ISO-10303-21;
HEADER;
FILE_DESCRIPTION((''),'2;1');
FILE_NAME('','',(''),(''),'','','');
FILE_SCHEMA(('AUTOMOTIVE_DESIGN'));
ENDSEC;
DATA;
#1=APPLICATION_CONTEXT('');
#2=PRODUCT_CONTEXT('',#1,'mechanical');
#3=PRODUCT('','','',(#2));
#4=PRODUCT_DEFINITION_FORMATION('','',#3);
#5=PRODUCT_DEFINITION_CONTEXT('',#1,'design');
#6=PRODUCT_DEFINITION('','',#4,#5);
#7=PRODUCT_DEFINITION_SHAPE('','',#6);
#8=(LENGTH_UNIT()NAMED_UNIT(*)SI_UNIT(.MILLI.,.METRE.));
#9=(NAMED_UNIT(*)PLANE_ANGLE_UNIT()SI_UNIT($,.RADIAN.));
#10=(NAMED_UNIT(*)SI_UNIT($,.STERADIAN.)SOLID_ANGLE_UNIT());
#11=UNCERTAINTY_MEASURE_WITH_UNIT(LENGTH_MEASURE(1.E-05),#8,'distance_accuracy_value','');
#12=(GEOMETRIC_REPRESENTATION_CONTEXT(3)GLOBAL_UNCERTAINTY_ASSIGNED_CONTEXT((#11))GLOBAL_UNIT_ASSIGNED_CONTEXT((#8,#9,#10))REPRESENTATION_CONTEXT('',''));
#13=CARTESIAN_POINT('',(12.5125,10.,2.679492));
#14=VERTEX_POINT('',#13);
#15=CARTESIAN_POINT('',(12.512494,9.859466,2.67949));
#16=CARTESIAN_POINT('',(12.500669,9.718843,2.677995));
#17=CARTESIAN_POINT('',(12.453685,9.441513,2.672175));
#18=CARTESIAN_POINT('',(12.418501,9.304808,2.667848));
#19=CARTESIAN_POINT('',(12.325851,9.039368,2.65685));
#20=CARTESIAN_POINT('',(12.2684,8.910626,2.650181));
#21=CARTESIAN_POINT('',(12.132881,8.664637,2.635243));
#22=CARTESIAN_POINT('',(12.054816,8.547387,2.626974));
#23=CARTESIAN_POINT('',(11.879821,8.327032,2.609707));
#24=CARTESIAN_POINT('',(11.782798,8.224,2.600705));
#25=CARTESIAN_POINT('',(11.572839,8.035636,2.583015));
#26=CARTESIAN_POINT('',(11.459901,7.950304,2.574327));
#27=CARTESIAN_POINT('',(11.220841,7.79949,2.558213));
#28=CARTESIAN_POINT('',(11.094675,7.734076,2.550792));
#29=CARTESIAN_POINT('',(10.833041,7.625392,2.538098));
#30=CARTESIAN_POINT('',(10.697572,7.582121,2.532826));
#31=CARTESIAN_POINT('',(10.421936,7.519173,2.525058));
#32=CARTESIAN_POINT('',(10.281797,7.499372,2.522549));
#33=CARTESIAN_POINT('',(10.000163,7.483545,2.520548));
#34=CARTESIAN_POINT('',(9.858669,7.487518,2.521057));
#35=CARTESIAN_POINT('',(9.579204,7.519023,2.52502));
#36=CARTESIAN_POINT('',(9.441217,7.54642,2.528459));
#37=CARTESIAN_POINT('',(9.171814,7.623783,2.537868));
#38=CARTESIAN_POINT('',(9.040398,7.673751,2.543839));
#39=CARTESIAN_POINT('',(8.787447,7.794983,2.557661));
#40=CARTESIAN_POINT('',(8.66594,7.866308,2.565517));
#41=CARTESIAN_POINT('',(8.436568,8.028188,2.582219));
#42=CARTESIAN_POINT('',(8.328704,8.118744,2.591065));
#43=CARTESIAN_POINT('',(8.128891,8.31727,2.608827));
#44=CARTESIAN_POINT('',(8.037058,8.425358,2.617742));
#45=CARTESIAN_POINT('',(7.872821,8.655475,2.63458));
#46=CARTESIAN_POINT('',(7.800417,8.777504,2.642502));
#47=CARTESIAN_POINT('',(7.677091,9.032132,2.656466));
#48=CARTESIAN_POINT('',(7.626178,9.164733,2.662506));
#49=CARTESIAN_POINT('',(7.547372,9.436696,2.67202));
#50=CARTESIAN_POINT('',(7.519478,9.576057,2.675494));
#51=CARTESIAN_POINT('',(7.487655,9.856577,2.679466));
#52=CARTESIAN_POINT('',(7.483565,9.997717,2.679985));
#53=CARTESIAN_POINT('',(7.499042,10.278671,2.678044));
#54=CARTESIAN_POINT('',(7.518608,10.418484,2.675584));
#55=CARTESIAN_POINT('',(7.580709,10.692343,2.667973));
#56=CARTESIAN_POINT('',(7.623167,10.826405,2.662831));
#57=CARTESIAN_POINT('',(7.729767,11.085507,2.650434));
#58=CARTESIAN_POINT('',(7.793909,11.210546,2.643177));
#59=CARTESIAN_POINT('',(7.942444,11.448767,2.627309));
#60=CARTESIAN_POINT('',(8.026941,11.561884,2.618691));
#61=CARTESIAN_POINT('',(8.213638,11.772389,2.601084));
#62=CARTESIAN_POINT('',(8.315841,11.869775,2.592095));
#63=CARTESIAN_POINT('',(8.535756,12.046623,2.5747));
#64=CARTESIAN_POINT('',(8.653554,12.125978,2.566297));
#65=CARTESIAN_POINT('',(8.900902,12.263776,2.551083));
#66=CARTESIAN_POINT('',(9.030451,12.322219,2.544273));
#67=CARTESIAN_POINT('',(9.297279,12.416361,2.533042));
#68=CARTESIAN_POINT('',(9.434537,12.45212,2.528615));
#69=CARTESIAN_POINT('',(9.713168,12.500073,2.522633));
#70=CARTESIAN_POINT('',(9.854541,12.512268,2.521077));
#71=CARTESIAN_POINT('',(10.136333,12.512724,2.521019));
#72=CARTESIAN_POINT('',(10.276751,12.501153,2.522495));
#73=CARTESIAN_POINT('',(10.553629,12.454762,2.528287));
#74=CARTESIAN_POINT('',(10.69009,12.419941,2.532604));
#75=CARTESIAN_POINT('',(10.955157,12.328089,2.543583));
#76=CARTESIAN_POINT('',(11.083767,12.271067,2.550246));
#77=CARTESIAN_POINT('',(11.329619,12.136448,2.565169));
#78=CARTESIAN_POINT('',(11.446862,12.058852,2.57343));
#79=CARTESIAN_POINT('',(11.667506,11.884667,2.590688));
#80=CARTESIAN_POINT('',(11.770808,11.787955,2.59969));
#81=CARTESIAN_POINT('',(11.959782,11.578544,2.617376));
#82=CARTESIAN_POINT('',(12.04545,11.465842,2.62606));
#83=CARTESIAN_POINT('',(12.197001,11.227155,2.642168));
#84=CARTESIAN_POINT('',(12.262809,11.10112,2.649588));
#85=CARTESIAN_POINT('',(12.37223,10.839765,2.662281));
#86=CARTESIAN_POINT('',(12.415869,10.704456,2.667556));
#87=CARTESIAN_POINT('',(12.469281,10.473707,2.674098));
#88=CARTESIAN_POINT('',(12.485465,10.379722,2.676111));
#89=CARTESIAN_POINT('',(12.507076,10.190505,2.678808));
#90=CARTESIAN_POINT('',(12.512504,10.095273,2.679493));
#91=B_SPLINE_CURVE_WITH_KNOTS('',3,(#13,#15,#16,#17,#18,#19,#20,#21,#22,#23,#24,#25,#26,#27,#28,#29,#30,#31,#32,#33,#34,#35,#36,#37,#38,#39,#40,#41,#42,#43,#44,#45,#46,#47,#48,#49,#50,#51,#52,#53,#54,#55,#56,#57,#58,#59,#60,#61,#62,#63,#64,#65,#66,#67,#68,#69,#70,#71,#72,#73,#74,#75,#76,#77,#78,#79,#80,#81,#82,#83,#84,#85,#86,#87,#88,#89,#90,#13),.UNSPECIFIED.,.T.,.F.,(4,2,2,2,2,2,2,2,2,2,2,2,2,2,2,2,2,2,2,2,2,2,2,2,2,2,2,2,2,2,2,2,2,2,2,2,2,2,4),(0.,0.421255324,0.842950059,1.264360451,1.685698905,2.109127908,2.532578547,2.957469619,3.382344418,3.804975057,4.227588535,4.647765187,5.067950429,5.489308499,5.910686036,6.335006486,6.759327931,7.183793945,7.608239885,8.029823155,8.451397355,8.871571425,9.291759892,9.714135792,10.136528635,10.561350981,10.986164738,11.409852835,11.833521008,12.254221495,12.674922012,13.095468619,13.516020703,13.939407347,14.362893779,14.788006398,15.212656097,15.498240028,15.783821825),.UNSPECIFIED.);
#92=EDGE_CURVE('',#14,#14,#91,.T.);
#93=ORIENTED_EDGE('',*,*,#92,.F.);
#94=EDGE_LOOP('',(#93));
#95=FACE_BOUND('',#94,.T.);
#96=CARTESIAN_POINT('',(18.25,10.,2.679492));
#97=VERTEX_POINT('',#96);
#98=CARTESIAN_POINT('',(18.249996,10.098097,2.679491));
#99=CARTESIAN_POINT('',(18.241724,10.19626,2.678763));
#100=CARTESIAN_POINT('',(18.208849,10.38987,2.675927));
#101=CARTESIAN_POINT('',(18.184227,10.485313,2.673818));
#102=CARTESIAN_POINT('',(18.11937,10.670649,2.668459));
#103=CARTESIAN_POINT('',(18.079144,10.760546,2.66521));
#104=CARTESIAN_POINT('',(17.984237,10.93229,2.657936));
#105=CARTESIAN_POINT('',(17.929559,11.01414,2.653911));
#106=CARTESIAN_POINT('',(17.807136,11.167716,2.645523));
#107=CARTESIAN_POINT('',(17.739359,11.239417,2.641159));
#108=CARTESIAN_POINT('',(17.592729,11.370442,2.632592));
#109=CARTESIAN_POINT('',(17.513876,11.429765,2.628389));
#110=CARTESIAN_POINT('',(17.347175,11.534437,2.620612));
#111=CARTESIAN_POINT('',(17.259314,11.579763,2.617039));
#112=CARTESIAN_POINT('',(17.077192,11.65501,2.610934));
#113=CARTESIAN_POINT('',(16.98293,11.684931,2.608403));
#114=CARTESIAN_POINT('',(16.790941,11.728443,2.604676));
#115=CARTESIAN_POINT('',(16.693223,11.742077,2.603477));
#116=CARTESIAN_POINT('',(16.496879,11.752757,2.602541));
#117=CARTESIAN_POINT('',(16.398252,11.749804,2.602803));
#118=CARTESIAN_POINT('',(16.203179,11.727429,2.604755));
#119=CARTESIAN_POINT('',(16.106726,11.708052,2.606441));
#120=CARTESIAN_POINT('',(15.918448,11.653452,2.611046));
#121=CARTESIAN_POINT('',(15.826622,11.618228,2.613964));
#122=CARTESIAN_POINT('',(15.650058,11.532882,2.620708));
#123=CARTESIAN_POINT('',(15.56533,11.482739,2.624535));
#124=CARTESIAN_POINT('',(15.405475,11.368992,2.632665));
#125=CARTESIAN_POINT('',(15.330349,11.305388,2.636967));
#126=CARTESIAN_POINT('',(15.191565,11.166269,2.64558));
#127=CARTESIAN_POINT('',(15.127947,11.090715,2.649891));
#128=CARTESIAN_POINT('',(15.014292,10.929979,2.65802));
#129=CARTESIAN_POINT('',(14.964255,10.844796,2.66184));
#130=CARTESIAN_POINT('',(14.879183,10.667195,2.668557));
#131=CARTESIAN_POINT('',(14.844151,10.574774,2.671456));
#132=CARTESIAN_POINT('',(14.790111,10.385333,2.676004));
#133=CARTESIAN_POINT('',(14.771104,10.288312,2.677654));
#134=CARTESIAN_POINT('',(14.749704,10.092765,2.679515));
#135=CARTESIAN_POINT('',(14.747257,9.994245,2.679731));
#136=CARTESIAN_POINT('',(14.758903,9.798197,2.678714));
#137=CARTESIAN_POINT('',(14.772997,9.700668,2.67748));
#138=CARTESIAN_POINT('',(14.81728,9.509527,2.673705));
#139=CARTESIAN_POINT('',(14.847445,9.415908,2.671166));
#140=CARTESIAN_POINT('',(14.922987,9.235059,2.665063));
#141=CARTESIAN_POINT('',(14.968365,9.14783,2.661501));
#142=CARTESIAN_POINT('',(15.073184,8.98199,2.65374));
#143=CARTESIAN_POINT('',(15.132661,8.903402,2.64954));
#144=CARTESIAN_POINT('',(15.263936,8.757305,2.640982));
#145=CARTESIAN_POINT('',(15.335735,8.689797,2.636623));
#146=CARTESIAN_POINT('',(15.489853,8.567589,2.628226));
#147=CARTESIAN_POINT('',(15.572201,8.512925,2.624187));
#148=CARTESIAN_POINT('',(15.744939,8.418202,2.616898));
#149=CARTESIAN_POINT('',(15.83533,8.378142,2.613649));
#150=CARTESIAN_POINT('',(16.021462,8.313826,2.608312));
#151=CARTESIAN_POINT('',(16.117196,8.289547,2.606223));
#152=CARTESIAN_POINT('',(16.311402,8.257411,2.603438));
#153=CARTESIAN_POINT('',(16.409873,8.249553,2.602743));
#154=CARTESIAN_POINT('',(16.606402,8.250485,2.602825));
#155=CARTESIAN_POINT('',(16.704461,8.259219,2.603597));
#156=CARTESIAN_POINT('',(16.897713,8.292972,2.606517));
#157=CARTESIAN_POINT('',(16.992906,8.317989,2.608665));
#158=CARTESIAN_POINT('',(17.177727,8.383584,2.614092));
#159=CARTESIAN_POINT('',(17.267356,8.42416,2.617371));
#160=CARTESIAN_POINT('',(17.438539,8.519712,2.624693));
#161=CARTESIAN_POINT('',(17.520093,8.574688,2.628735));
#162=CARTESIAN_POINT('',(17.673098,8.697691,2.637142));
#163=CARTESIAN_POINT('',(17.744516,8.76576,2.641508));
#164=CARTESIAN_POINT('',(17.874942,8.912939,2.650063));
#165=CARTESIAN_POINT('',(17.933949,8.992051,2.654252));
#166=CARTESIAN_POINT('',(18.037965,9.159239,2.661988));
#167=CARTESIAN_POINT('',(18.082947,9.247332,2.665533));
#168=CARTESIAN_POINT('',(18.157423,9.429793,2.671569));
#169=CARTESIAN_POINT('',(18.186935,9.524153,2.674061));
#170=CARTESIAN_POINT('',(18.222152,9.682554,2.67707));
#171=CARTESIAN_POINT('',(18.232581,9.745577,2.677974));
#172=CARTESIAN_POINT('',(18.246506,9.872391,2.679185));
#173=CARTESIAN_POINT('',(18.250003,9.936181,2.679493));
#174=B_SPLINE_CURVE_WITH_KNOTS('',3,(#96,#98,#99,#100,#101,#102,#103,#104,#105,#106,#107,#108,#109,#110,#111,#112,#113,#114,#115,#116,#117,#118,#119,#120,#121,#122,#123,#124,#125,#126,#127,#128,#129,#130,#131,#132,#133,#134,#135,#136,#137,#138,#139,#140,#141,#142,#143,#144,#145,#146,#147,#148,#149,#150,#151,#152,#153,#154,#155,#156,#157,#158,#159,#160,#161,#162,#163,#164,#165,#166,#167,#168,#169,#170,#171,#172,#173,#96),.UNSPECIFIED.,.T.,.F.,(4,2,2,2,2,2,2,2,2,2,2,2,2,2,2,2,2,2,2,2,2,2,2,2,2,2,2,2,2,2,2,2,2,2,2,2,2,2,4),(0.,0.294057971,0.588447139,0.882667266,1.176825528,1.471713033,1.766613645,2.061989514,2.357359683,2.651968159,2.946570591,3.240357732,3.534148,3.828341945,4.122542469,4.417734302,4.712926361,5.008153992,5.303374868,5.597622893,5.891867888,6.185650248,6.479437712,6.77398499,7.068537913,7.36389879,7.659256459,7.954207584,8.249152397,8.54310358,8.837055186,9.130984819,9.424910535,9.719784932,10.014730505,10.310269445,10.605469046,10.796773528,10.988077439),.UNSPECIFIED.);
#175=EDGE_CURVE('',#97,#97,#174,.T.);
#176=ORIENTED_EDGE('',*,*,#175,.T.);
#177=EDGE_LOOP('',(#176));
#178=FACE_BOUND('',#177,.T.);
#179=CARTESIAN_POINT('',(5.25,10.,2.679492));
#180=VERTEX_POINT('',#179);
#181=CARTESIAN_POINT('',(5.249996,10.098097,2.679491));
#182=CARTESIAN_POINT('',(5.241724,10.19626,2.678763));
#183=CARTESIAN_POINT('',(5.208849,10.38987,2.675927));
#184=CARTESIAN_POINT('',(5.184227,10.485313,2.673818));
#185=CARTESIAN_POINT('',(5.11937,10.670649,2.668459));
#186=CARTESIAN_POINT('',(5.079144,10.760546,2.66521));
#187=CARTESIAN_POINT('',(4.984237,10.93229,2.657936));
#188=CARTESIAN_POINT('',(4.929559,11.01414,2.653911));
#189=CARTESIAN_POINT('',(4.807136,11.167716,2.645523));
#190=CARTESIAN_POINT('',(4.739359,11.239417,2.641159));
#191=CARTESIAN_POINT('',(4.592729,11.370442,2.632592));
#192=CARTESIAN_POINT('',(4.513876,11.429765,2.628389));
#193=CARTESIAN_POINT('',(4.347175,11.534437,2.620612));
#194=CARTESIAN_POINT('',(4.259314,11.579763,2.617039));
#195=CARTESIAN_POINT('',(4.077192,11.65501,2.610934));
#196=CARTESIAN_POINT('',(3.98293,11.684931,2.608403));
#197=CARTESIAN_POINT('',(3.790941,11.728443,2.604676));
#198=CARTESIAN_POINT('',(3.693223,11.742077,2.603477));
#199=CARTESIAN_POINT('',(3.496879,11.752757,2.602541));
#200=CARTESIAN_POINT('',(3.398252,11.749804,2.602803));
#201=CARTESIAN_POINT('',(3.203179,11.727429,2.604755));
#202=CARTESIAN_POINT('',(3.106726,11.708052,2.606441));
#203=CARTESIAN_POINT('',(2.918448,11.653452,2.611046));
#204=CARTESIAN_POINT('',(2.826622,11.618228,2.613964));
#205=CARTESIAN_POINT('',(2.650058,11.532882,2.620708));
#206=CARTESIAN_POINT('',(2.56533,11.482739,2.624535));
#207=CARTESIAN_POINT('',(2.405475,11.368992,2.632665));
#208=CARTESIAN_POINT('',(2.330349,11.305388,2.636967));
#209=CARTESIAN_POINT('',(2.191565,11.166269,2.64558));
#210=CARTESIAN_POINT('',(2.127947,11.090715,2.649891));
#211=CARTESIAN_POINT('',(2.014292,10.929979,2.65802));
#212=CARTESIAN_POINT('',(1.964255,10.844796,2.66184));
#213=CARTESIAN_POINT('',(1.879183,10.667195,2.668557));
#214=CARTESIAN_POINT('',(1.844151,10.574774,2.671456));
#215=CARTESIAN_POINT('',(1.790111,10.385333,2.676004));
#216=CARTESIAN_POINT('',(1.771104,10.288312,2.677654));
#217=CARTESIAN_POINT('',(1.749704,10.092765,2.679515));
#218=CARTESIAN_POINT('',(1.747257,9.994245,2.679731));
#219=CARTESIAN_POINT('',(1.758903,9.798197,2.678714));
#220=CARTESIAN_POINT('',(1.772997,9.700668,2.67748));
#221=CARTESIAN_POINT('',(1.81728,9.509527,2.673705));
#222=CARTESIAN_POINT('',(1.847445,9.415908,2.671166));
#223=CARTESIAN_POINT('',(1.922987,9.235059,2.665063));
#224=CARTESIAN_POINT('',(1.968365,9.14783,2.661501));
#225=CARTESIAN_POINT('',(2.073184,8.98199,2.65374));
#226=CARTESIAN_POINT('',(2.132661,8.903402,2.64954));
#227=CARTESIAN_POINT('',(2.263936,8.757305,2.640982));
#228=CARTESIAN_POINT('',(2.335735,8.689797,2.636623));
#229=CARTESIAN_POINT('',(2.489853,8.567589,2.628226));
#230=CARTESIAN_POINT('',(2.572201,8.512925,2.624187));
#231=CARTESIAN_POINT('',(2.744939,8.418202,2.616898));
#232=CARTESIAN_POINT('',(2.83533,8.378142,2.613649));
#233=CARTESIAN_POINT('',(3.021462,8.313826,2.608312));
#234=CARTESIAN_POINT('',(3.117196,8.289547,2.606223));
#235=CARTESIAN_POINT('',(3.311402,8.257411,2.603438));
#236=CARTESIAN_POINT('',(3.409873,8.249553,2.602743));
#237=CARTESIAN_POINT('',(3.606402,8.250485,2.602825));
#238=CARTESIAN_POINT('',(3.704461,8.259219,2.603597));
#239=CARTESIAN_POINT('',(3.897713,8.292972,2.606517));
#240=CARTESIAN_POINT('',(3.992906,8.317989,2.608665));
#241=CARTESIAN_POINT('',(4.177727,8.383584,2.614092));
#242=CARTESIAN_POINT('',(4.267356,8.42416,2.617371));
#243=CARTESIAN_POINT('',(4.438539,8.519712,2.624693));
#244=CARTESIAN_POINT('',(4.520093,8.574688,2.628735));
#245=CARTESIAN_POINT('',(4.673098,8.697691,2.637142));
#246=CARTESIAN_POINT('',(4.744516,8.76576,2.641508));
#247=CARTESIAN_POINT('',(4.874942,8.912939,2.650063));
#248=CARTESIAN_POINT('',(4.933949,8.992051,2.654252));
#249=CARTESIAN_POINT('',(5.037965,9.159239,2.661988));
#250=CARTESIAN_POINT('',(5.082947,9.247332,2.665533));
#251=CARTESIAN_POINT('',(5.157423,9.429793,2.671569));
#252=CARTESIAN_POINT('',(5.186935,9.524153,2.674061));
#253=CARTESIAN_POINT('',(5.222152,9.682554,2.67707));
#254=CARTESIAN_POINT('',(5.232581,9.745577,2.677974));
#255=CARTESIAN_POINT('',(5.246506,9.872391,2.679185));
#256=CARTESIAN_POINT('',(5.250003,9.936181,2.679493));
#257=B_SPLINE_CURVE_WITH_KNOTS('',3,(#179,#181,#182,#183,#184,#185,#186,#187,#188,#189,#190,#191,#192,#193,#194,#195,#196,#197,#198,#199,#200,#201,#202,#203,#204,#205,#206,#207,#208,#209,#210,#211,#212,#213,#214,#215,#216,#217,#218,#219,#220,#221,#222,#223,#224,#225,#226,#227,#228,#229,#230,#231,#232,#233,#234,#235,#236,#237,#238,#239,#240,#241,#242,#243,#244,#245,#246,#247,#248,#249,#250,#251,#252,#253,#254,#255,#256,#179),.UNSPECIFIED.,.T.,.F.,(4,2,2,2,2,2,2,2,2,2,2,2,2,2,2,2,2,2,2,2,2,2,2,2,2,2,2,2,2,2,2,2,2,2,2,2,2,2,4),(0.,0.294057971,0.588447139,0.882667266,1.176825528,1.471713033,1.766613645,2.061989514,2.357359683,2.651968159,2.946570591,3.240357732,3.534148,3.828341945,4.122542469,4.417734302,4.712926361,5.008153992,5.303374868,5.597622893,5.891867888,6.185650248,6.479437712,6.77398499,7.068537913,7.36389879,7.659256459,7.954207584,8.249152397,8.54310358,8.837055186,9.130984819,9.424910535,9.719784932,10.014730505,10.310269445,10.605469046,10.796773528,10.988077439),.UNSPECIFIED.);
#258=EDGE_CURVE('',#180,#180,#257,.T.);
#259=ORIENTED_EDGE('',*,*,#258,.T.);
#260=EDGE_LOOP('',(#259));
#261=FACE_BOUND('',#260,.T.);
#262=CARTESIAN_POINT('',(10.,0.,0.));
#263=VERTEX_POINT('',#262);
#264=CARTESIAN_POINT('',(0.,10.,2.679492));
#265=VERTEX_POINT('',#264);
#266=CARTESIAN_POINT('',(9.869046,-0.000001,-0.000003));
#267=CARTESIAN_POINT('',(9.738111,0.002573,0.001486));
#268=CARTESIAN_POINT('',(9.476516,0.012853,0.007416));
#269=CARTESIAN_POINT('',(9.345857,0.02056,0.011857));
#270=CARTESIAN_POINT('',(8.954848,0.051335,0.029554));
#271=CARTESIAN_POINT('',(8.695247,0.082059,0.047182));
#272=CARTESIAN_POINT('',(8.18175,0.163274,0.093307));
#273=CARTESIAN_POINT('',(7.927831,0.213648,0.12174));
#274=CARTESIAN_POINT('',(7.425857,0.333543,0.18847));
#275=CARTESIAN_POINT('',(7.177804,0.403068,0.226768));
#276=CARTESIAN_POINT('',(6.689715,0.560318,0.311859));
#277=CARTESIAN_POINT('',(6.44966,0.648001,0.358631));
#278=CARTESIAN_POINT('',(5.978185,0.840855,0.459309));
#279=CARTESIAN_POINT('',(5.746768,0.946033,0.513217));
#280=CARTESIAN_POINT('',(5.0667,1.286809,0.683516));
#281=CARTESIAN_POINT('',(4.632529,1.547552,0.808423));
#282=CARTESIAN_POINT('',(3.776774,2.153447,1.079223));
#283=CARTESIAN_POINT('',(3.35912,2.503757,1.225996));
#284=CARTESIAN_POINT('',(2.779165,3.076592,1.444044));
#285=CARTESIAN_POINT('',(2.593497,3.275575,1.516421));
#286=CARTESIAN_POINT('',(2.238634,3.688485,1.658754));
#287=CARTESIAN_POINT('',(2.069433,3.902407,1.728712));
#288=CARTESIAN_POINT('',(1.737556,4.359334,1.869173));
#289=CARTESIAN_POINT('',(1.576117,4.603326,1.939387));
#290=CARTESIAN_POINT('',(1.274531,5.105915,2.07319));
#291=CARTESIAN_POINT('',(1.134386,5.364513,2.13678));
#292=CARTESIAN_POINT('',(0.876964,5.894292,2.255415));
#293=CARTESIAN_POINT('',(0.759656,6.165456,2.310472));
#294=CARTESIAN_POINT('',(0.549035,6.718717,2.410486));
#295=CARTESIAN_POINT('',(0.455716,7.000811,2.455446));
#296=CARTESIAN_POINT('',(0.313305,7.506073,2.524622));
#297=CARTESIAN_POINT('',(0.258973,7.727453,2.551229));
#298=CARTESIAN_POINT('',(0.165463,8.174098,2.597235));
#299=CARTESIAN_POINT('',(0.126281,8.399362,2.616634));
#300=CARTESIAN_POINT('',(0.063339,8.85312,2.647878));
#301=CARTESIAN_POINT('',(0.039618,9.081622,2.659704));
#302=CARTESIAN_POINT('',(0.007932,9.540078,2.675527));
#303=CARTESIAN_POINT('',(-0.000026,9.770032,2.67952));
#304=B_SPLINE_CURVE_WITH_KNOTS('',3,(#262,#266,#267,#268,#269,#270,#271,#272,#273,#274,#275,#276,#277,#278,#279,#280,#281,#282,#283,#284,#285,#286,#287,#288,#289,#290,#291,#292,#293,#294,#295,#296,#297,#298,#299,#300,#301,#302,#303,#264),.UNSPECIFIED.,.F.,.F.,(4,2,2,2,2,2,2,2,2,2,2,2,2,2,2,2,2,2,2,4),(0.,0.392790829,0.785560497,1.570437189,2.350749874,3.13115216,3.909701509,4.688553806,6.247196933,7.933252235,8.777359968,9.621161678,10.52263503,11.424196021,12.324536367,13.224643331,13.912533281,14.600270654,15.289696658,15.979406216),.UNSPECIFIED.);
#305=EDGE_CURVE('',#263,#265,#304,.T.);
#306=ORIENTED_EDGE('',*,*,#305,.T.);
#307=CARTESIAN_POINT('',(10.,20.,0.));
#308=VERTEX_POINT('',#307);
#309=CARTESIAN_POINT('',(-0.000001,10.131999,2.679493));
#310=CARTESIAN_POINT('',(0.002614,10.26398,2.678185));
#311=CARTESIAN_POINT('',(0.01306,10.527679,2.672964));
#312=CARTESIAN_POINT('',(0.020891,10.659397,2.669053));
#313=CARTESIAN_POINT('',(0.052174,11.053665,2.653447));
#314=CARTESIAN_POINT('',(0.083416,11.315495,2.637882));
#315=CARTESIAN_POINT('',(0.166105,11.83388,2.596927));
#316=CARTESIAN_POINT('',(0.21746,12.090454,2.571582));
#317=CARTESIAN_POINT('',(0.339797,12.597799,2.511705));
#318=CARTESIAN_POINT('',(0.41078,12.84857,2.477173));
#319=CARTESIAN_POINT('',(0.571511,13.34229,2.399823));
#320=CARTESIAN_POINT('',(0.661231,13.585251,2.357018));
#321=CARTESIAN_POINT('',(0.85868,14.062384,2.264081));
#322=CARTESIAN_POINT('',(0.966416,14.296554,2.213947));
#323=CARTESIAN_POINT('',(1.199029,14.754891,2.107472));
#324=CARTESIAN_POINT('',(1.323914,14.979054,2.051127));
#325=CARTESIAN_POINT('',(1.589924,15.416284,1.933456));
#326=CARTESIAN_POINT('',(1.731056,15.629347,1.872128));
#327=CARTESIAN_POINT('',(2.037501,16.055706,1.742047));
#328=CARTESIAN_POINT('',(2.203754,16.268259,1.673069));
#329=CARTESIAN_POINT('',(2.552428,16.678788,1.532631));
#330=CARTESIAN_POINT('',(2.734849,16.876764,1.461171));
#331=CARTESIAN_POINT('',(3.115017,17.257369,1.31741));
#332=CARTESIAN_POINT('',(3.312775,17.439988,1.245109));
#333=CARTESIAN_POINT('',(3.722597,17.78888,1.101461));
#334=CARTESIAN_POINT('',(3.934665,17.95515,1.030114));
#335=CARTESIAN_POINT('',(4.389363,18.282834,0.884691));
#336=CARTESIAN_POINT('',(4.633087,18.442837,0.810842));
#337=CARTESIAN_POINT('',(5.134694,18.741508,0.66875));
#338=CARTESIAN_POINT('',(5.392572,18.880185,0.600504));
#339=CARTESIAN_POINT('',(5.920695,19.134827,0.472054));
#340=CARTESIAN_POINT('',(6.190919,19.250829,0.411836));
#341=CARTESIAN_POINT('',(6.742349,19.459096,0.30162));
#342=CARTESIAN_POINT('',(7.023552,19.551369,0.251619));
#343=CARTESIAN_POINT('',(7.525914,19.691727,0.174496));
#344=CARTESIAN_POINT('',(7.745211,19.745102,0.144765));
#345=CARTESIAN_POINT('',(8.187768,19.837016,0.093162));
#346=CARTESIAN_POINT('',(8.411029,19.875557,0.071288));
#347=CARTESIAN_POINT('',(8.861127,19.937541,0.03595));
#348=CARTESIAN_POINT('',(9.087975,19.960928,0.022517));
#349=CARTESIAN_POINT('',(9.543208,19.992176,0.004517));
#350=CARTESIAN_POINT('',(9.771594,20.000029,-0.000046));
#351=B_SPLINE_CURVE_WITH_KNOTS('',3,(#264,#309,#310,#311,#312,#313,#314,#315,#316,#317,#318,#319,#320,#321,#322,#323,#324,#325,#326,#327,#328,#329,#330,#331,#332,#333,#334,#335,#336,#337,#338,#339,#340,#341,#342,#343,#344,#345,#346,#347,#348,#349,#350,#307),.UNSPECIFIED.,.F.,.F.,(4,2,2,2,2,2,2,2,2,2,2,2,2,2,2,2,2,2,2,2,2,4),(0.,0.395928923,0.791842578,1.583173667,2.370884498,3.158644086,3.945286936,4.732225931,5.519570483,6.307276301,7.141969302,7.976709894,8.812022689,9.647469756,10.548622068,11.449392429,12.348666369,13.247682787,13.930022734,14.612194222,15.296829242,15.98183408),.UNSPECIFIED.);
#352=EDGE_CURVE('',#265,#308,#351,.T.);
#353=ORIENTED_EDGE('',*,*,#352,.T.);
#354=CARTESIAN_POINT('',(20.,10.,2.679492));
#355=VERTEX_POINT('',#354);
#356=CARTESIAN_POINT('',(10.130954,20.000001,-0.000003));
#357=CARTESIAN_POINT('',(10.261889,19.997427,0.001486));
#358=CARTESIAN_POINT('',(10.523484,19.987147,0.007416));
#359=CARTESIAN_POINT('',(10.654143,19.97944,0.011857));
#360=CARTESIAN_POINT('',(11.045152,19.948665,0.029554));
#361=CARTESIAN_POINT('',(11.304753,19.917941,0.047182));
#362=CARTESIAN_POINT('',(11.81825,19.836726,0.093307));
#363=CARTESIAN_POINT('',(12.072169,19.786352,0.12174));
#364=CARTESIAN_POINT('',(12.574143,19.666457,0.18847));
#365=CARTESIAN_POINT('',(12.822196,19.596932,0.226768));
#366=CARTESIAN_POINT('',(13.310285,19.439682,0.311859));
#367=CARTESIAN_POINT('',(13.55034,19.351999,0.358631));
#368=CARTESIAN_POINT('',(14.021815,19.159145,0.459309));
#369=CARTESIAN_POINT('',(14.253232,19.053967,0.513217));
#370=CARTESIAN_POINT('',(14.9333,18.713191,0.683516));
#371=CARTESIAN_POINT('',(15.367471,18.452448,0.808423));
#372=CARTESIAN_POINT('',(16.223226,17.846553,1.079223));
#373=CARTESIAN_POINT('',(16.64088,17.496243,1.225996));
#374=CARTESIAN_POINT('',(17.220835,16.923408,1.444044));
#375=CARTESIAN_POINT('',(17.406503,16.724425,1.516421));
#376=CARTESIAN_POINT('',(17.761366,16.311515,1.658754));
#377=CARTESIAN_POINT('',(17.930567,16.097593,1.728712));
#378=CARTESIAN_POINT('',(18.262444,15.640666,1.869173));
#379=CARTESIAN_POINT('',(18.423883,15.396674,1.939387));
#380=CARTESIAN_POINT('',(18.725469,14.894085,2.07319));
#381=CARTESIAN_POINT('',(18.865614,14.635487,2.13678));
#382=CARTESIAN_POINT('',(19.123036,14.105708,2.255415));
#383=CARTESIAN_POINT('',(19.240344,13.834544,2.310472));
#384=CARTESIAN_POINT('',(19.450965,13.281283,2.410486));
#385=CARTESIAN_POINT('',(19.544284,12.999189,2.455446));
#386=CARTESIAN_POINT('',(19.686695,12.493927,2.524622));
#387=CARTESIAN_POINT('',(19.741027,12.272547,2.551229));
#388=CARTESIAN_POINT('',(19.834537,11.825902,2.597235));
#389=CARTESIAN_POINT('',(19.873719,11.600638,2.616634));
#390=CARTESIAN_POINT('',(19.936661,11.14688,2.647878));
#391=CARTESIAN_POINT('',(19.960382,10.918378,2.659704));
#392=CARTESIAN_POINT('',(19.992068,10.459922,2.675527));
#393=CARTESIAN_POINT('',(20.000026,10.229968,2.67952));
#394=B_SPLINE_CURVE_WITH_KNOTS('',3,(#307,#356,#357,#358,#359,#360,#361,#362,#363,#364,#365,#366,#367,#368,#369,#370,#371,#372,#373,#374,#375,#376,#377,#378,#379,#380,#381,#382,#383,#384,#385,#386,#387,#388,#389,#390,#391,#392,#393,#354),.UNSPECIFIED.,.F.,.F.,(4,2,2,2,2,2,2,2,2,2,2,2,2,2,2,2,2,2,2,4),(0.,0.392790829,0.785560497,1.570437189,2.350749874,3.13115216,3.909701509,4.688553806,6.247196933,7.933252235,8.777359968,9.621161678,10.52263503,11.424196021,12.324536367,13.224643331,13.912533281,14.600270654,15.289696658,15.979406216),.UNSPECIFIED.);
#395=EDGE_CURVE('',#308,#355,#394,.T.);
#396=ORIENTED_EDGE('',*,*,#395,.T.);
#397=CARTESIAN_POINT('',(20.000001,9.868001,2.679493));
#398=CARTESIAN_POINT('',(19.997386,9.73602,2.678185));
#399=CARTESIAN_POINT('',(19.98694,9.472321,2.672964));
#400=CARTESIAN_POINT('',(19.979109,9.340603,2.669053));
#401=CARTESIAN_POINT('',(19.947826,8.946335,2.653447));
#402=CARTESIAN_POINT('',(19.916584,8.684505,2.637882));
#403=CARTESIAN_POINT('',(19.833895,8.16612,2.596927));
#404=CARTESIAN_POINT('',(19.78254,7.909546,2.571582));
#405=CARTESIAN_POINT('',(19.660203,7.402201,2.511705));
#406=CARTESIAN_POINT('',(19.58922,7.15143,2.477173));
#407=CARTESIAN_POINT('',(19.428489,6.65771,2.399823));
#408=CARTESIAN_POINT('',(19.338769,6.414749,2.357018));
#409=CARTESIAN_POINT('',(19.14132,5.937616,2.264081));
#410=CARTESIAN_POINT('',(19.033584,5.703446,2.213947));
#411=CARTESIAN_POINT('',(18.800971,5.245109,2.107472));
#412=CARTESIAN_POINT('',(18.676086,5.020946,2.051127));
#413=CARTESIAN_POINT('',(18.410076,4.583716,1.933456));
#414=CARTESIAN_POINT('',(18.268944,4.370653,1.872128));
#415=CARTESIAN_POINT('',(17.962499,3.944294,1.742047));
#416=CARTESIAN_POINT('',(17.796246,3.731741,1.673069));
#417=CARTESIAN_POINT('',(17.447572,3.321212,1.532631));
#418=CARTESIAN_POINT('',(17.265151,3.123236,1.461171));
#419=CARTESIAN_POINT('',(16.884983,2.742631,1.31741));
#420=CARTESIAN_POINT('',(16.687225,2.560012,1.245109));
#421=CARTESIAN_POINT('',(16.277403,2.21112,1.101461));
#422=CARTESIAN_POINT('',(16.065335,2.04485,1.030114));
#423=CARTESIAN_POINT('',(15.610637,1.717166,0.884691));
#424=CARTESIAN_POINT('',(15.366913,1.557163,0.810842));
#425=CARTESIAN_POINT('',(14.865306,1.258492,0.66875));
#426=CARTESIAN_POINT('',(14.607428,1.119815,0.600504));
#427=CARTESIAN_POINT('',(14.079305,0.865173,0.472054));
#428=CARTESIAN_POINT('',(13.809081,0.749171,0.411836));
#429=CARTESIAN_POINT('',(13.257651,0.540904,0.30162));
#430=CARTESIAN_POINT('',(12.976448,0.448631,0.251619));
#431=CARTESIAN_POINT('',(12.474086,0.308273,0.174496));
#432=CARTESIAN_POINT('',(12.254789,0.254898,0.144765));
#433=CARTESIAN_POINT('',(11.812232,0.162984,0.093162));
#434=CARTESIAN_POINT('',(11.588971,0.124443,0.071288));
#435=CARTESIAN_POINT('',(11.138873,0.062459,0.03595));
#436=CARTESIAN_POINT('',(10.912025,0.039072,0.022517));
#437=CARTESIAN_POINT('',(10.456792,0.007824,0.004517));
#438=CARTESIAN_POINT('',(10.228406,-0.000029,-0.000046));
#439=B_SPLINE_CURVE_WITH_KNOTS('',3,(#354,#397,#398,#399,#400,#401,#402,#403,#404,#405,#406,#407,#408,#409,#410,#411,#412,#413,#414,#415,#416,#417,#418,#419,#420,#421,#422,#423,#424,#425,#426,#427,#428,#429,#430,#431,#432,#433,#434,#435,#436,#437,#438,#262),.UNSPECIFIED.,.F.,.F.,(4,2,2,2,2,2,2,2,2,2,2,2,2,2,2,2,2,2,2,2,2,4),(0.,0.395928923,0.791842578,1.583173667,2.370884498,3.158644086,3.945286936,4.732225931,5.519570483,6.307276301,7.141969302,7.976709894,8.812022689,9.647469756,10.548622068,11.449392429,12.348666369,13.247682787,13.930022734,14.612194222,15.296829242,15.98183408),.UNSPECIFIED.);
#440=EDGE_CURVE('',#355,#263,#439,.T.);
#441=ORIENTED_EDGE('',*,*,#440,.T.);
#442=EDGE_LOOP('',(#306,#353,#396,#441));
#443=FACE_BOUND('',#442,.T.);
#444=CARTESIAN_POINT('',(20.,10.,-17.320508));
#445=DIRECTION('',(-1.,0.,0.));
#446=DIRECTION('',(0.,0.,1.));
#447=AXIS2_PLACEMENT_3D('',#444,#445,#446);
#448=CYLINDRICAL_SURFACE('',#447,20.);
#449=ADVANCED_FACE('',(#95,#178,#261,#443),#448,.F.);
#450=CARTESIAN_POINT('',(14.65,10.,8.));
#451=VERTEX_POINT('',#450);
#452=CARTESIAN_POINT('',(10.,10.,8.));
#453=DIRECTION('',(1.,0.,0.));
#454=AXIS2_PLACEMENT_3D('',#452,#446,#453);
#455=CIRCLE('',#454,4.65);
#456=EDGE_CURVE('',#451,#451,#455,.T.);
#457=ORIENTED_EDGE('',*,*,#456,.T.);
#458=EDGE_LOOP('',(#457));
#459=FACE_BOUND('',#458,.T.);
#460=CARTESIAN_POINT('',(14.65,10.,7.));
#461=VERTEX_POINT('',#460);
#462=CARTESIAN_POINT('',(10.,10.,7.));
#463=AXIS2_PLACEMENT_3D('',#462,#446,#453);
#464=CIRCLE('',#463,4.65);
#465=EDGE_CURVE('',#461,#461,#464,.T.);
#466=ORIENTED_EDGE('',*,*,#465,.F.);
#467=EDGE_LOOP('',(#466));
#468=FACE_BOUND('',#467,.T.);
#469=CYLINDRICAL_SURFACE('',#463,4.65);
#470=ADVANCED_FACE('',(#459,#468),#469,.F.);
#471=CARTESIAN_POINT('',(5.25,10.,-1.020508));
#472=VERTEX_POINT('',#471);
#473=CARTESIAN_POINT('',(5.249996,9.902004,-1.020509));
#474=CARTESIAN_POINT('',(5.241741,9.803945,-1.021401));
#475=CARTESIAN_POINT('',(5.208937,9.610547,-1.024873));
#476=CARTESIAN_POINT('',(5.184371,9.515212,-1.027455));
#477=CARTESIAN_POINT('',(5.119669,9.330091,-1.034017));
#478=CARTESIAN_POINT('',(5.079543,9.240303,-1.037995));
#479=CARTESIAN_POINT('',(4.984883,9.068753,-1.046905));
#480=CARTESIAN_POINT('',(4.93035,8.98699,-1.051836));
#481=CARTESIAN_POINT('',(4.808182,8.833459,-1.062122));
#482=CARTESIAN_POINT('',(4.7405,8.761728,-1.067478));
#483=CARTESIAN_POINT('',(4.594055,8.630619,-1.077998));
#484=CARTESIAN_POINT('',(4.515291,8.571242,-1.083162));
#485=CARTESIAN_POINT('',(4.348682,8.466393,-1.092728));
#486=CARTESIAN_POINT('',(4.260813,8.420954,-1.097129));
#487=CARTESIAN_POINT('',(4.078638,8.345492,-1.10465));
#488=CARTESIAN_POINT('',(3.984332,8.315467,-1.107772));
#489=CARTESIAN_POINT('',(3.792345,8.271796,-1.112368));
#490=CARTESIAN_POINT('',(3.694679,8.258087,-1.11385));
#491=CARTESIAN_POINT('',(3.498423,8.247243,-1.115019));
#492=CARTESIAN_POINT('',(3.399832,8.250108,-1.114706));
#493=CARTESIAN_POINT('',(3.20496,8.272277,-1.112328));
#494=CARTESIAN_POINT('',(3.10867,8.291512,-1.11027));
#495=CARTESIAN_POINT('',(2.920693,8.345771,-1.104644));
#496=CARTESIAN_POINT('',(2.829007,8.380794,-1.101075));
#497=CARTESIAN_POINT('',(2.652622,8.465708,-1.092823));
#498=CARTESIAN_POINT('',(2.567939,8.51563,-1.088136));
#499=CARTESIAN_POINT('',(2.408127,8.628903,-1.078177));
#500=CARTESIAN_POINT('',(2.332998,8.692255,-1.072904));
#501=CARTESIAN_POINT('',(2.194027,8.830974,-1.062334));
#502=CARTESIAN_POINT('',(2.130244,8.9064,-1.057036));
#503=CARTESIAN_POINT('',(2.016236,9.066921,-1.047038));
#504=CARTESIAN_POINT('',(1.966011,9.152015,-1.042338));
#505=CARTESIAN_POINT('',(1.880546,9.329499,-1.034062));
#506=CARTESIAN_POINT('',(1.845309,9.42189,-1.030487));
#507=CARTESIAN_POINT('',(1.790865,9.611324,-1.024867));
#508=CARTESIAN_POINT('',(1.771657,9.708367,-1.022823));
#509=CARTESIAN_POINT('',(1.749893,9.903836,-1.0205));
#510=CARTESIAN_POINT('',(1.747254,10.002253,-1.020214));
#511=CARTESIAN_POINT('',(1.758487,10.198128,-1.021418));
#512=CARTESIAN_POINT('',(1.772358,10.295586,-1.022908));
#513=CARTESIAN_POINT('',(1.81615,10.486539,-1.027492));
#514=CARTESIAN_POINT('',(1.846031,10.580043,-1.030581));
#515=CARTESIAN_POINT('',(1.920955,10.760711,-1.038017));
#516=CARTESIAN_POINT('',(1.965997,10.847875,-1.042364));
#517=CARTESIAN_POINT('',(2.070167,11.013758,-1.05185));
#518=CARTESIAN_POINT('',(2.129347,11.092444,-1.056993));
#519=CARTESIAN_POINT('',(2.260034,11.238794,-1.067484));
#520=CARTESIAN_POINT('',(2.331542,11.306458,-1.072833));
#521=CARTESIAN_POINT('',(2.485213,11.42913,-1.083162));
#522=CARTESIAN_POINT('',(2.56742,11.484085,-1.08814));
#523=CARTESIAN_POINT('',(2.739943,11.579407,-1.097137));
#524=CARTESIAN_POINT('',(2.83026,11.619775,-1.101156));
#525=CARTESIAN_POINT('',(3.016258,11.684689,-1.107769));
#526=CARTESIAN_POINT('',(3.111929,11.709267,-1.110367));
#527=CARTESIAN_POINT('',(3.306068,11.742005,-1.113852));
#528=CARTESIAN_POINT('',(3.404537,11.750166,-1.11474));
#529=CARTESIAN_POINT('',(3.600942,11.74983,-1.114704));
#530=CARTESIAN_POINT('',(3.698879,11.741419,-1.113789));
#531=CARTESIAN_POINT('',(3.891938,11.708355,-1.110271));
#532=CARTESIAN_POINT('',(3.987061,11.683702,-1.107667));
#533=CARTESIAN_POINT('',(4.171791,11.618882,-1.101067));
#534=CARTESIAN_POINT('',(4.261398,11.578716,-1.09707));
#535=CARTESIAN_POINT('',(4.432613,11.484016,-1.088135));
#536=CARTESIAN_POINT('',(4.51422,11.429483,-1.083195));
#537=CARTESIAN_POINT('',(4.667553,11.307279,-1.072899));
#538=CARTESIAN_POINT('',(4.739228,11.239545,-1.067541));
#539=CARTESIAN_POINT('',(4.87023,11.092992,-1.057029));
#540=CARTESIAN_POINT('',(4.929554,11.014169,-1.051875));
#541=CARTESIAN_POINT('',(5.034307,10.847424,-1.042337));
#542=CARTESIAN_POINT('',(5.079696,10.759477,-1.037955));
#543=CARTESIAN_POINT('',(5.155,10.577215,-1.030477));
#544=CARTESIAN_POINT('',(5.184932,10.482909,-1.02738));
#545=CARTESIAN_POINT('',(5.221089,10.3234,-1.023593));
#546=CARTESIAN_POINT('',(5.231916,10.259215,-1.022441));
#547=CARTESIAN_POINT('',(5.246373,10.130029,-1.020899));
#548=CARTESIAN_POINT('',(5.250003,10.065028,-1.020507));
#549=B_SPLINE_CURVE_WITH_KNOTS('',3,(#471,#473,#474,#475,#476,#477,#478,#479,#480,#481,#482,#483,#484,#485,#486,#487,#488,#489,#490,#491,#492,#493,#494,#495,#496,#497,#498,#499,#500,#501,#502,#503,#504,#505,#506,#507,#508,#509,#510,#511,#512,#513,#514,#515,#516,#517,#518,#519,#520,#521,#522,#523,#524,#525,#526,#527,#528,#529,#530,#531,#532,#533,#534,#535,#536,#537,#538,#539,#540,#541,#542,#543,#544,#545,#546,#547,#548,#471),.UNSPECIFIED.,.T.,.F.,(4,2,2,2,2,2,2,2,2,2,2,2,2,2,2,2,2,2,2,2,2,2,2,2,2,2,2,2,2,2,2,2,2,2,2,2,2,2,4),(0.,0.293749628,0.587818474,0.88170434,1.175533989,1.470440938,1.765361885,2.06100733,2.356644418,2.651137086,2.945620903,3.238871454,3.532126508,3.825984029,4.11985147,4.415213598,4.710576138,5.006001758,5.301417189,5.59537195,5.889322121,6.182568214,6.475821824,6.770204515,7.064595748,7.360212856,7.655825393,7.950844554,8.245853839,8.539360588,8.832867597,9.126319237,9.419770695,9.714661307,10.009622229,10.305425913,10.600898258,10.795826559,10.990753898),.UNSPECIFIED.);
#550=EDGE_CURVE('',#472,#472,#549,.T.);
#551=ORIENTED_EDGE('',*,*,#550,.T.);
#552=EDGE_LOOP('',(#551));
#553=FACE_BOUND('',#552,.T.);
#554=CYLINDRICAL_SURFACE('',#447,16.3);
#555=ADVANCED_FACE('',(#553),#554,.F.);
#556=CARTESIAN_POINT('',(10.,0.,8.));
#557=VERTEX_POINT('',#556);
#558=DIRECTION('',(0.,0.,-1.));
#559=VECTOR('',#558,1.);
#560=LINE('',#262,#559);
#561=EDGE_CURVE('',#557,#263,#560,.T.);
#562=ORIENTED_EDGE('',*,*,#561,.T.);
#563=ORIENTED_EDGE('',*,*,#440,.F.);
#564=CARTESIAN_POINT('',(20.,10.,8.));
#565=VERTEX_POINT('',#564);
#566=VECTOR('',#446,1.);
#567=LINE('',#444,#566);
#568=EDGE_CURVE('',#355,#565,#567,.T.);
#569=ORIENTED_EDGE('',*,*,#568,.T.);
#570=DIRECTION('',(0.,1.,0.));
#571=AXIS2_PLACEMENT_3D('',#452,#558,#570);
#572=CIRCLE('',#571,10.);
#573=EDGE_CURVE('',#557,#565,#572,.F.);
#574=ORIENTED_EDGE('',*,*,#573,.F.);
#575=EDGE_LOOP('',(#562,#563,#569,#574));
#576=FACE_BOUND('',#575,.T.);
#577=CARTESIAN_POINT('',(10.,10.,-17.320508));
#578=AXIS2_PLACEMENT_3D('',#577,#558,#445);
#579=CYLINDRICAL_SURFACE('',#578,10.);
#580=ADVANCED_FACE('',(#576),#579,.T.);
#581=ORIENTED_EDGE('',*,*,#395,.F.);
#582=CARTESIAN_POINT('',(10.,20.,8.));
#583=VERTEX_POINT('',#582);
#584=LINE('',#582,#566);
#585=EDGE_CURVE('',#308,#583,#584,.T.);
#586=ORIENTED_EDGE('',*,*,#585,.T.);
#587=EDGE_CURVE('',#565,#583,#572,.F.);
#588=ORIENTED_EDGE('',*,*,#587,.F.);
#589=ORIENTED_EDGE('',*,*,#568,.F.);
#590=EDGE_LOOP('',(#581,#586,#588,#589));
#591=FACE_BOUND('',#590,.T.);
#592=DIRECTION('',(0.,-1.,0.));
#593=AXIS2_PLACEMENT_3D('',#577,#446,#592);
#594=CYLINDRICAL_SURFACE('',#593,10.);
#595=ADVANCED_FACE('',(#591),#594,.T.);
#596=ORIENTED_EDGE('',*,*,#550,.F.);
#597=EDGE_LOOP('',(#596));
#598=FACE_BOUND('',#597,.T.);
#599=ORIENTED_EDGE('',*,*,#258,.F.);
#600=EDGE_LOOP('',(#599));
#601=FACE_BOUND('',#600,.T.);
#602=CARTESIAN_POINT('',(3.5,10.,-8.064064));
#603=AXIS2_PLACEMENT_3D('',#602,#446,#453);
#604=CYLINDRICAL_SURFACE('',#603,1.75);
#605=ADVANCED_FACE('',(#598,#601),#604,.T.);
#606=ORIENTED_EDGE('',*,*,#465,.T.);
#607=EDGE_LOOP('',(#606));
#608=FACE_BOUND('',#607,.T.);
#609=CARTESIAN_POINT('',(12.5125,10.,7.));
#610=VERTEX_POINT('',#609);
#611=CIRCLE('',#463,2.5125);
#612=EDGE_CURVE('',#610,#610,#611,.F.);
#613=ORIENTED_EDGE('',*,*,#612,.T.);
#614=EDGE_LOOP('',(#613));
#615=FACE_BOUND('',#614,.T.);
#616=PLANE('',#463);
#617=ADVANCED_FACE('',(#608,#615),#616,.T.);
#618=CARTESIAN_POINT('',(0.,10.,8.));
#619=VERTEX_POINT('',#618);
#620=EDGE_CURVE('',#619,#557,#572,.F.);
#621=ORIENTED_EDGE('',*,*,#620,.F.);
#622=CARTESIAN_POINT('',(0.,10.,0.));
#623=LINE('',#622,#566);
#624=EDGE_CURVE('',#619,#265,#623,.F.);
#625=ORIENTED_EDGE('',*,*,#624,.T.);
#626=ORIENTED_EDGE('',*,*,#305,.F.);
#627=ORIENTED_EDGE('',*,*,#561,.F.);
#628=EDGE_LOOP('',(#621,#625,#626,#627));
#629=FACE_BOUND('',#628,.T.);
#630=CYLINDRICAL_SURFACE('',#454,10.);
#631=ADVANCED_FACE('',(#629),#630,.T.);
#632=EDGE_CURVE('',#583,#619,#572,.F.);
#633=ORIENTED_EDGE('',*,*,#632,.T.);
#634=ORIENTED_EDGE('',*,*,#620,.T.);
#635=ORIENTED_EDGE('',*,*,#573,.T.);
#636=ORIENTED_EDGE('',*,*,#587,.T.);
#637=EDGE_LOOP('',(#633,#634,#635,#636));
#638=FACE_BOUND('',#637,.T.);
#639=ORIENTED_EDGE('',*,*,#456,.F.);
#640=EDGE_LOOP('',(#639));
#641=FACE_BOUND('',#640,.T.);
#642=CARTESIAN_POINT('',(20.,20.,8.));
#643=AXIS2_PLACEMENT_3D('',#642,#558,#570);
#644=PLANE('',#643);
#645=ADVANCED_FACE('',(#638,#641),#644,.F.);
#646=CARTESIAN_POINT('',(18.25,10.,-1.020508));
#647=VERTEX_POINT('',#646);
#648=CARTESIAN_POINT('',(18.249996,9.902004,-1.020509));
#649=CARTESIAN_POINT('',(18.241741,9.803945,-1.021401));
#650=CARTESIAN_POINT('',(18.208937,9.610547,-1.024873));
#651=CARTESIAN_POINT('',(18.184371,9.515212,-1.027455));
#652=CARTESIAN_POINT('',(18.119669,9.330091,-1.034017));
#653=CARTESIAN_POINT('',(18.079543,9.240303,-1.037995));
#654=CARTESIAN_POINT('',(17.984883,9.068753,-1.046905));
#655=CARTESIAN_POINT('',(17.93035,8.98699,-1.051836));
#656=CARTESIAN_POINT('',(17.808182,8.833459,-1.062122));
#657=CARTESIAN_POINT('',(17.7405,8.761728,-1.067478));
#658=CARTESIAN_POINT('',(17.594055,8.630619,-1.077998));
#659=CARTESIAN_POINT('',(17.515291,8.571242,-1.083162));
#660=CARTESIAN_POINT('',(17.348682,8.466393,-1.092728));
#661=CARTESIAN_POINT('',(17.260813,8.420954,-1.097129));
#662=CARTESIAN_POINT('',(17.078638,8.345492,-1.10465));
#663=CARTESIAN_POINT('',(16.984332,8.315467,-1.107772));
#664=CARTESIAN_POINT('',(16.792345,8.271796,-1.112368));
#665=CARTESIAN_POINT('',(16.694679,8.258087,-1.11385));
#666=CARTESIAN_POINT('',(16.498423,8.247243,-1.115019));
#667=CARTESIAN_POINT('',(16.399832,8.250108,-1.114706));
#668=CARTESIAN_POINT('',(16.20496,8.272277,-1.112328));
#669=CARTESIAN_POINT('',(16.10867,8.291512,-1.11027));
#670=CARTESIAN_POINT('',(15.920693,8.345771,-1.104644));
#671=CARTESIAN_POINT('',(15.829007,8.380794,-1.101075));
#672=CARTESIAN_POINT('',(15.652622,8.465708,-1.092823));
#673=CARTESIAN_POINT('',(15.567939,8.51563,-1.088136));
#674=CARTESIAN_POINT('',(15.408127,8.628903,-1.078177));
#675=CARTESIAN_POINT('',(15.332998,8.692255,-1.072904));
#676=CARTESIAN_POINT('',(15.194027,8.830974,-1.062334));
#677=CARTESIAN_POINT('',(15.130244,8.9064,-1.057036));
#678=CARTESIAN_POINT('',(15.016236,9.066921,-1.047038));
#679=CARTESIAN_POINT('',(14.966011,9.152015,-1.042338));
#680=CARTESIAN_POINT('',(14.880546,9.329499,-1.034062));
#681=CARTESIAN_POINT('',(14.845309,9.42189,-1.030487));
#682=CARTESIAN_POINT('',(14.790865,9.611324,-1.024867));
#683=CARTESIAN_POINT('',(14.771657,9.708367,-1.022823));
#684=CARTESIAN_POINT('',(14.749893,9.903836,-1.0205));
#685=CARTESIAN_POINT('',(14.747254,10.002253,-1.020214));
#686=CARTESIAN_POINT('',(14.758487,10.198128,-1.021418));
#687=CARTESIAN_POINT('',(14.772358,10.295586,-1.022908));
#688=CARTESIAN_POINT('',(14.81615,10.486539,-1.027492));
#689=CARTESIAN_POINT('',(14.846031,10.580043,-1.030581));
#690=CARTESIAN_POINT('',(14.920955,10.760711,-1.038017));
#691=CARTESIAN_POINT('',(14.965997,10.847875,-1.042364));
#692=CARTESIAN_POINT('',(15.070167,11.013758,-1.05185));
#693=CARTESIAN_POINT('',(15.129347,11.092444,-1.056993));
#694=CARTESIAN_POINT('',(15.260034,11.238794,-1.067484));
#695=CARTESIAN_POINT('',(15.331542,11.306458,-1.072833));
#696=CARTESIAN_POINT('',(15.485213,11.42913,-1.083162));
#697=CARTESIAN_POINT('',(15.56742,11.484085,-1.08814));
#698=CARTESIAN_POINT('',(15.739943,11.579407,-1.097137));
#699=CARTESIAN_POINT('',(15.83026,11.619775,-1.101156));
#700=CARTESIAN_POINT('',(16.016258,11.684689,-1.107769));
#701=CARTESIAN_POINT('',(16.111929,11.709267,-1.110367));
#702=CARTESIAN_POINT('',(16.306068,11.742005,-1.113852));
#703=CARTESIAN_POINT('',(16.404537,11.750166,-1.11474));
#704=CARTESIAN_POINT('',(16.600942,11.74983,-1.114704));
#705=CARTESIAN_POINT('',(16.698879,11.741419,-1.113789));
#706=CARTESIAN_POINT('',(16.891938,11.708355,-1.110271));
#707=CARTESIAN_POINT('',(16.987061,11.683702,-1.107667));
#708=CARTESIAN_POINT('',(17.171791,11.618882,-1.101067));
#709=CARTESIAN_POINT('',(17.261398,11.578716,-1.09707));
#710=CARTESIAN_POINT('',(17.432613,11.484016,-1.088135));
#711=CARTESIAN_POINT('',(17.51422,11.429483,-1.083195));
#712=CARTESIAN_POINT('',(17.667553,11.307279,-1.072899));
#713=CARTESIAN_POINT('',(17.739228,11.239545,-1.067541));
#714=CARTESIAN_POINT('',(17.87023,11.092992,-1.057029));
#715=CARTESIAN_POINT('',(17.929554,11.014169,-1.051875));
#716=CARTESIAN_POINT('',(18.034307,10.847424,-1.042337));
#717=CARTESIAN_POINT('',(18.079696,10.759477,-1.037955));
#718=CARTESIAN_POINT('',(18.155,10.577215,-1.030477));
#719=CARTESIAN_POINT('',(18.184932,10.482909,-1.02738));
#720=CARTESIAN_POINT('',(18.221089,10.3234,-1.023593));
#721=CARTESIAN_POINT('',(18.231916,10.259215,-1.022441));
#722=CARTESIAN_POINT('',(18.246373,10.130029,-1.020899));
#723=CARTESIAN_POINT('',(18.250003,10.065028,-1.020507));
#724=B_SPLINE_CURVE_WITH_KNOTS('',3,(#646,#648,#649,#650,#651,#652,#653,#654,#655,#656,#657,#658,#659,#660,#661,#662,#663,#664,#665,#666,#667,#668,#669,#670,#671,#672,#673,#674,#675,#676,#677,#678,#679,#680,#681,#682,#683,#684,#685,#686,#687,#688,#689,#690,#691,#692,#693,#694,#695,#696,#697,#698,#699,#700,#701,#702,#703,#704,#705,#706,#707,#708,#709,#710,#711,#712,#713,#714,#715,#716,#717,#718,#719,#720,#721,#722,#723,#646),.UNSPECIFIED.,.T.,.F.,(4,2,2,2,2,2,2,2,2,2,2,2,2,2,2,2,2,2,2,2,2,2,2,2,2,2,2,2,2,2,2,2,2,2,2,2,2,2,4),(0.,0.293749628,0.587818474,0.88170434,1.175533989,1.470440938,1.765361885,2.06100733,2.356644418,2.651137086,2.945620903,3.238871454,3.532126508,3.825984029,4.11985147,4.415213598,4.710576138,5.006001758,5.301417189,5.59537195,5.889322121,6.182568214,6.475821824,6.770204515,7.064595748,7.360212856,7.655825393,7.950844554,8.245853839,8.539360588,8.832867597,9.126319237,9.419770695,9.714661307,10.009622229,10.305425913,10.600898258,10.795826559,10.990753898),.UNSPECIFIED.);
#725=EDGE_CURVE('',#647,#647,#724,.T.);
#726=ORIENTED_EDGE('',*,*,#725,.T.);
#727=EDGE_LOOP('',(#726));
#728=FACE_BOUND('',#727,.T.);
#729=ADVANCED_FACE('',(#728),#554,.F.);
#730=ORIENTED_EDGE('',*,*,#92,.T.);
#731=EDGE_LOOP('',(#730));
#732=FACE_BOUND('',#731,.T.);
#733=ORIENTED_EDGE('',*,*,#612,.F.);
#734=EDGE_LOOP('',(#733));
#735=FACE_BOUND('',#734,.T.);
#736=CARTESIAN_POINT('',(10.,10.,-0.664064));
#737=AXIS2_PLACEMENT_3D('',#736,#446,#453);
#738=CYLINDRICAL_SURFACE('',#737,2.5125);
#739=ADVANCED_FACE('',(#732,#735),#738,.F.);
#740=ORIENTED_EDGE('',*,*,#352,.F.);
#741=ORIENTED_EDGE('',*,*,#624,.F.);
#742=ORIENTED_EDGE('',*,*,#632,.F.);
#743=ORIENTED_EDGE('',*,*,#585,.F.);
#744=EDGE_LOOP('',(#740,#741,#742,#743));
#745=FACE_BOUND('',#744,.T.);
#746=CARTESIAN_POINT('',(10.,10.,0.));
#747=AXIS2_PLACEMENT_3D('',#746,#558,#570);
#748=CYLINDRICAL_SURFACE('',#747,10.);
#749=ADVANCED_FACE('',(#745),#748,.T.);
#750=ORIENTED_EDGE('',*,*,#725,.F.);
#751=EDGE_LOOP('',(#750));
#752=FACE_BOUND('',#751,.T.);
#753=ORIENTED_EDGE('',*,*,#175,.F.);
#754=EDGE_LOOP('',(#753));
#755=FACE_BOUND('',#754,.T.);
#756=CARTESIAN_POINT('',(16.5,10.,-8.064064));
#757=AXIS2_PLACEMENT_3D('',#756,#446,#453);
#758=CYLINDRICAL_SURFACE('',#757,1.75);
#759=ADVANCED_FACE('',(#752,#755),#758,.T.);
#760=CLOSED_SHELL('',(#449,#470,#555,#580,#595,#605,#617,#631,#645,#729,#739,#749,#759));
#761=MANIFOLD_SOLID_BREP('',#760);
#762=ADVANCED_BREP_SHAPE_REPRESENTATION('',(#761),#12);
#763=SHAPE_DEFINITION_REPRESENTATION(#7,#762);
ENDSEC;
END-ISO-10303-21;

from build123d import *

# Parameters (mm, degrees)
BOSS_EXTRUDE2_DEPTH      = 20
FILLET1_START            = -1
FILLET1_DEPTH            = 9
CUT_EXTRUDE2_REACH       = 31.394
CUT_EXTRUDE2_END_RADIUS  = 20
SKETCH4_R                = 2.5125
BOSS_EXTRUDE3_REACH      = 31.394
BOSS_EXTRUDE3_END_RADIUS = 16.3
SKETCH6_R                = 1.75
SKETCH7_R                = 4.65
CUT_EXTRUDE4_DEPTH       = 1


with BuildPart() as part:
    # Sketch3 → Boss-Extrude2 (new body)
    with BuildSketch(Plane(origin=(0, 0, 0), x_dir=(0, 0, -1), z_dir=(1, 0, 0))):
        with BuildLine():
            Line((0, 20), (-8, 20))
            Line((-8, 20), (-8, 0))
            Line((-8, 0), (0, 0))
            ThreePointArc((0, 0), (-2.679491924, 10), (0, 20))
        make_face()
    extrude(amount=BOSS_EXTRUDE2_DEPTH)

    # Fillet1: read off the stored shape, not the designer's step
    # Fillet1 outline → Fillet1 (cut)
    with BuildSketch(Plane.XY.offset(FILLET1_START)):
        with BuildLine():
            Line((0, 20), (0, 10))
            ThreePointArc((0, 10), (2.928932188, 17.071067812), (10, 20))
            Line((10, 20), (0, 20))
        make_face()
        with BuildLine():
            ThreePointArc((10, 0), (2.928932188, 2.928932188), (0, 10))
            Line((0, 10), (0, 0))
            Line((0, 0), (10, 0))
        make_face()
        with BuildLine():
            Line((20, 20), (10, 20))
            ThreePointArc((10, 20), (17.071067812, 17.071067812), (20, 10))
            Line((20, 10), (20, 20))
        make_face()
        with BuildLine():
            ThreePointArc((20, 10), (17.071067812, 2.928932188), (10, 0))
            Line((10, 0), (20, 0))
            Line((20, 0), (20, 10))
        make_face()
    extrude(amount=FILLET1_DEPTH, mode=Mode.SUBTRACT)

    # Cut-Extrude2: up to this cylinder (the profile starts outside it)
    cut_extrude2_end = Plane(origin=(10, 10, -17.320508076), z_dir=(-1, 0, 0)) * Cylinder(CUT_EXTRUDE2_END_RADIUS, 103.788, mode=Mode.PRIVATE)
    # Sketch4 → Cut-Extrude2 (cut, up to the surface)
    with BuildSketch(Plane.XY.offset(8), mode=Mode.PRIVATE) as cut_extrude2_sk1:
        with Locations((10, 10)):
            Circle(SKETCH4_R)
    cut_extrude2_tool1 = extrude(cut_extrude2_sk1.sketch, amount=-CUT_EXTRUDE2_REACH, mode=Mode.PRIVATE) - cut_extrude2_end
    add(cut_extrude2_tool1.solids().sort_by_distance((10, 10, 8))[0], mode=Mode.SUBTRACT)

    # Boss-Extrude3: up to this cylinder (the profile starts outside it)
    boss_extrude3_end = Plane(origin=(10, 10, -17.320508076), z_dir=(-1, 0, 0)) * Cylinder(BOSS_EXTRUDE3_END_RADIUS, 109.388, mode=Mode.PRIVATE)
    # Sketch6 → Boss-Extrude3 (add, up to the surface)
    with BuildSketch(Plane.XY.offset(8), mode=Mode.PRIVATE) as boss_extrude3_sk1:
        with Locations((3.5, 10)):
            Circle(SKETCH6_R)
    boss_extrude3_tool1 = extrude(boss_extrude3_sk1.sketch, amount=-BOSS_EXTRUDE3_REACH, mode=Mode.PRIVATE) - boss_extrude3_end
    add(boss_extrude3_tool1.solids().sort_by_distance((3.5, 10, 8))[0])
    # Sketch6 → Boss-Extrude3 (add, up to the surface)
    with BuildSketch(Plane.XY.offset(8), mode=Mode.PRIVATE) as boss_extrude3_sk2:
        with Locations((16.5, 10)):
            Circle(SKETCH6_R)
    boss_extrude3_tool2 = extrude(boss_extrude3_sk2.sketch, amount=-BOSS_EXTRUDE3_REACH, mode=Mode.PRIVATE) - boss_extrude3_end
    add(boss_extrude3_tool2.solids().sort_by_distance((16.5, 10, 8))[0])

    # Sketch7 → Cut-Extrude4 (cut)
    with BuildSketch(Plane.XY.offset(8)):
        with Locations((10, 10)):
            Circle(SKETCH7_R)
    extrude(amount=-CUT_EXTRUDE4_DEPTH, mode=Mode.SUBTRACT)


solid = part.part
